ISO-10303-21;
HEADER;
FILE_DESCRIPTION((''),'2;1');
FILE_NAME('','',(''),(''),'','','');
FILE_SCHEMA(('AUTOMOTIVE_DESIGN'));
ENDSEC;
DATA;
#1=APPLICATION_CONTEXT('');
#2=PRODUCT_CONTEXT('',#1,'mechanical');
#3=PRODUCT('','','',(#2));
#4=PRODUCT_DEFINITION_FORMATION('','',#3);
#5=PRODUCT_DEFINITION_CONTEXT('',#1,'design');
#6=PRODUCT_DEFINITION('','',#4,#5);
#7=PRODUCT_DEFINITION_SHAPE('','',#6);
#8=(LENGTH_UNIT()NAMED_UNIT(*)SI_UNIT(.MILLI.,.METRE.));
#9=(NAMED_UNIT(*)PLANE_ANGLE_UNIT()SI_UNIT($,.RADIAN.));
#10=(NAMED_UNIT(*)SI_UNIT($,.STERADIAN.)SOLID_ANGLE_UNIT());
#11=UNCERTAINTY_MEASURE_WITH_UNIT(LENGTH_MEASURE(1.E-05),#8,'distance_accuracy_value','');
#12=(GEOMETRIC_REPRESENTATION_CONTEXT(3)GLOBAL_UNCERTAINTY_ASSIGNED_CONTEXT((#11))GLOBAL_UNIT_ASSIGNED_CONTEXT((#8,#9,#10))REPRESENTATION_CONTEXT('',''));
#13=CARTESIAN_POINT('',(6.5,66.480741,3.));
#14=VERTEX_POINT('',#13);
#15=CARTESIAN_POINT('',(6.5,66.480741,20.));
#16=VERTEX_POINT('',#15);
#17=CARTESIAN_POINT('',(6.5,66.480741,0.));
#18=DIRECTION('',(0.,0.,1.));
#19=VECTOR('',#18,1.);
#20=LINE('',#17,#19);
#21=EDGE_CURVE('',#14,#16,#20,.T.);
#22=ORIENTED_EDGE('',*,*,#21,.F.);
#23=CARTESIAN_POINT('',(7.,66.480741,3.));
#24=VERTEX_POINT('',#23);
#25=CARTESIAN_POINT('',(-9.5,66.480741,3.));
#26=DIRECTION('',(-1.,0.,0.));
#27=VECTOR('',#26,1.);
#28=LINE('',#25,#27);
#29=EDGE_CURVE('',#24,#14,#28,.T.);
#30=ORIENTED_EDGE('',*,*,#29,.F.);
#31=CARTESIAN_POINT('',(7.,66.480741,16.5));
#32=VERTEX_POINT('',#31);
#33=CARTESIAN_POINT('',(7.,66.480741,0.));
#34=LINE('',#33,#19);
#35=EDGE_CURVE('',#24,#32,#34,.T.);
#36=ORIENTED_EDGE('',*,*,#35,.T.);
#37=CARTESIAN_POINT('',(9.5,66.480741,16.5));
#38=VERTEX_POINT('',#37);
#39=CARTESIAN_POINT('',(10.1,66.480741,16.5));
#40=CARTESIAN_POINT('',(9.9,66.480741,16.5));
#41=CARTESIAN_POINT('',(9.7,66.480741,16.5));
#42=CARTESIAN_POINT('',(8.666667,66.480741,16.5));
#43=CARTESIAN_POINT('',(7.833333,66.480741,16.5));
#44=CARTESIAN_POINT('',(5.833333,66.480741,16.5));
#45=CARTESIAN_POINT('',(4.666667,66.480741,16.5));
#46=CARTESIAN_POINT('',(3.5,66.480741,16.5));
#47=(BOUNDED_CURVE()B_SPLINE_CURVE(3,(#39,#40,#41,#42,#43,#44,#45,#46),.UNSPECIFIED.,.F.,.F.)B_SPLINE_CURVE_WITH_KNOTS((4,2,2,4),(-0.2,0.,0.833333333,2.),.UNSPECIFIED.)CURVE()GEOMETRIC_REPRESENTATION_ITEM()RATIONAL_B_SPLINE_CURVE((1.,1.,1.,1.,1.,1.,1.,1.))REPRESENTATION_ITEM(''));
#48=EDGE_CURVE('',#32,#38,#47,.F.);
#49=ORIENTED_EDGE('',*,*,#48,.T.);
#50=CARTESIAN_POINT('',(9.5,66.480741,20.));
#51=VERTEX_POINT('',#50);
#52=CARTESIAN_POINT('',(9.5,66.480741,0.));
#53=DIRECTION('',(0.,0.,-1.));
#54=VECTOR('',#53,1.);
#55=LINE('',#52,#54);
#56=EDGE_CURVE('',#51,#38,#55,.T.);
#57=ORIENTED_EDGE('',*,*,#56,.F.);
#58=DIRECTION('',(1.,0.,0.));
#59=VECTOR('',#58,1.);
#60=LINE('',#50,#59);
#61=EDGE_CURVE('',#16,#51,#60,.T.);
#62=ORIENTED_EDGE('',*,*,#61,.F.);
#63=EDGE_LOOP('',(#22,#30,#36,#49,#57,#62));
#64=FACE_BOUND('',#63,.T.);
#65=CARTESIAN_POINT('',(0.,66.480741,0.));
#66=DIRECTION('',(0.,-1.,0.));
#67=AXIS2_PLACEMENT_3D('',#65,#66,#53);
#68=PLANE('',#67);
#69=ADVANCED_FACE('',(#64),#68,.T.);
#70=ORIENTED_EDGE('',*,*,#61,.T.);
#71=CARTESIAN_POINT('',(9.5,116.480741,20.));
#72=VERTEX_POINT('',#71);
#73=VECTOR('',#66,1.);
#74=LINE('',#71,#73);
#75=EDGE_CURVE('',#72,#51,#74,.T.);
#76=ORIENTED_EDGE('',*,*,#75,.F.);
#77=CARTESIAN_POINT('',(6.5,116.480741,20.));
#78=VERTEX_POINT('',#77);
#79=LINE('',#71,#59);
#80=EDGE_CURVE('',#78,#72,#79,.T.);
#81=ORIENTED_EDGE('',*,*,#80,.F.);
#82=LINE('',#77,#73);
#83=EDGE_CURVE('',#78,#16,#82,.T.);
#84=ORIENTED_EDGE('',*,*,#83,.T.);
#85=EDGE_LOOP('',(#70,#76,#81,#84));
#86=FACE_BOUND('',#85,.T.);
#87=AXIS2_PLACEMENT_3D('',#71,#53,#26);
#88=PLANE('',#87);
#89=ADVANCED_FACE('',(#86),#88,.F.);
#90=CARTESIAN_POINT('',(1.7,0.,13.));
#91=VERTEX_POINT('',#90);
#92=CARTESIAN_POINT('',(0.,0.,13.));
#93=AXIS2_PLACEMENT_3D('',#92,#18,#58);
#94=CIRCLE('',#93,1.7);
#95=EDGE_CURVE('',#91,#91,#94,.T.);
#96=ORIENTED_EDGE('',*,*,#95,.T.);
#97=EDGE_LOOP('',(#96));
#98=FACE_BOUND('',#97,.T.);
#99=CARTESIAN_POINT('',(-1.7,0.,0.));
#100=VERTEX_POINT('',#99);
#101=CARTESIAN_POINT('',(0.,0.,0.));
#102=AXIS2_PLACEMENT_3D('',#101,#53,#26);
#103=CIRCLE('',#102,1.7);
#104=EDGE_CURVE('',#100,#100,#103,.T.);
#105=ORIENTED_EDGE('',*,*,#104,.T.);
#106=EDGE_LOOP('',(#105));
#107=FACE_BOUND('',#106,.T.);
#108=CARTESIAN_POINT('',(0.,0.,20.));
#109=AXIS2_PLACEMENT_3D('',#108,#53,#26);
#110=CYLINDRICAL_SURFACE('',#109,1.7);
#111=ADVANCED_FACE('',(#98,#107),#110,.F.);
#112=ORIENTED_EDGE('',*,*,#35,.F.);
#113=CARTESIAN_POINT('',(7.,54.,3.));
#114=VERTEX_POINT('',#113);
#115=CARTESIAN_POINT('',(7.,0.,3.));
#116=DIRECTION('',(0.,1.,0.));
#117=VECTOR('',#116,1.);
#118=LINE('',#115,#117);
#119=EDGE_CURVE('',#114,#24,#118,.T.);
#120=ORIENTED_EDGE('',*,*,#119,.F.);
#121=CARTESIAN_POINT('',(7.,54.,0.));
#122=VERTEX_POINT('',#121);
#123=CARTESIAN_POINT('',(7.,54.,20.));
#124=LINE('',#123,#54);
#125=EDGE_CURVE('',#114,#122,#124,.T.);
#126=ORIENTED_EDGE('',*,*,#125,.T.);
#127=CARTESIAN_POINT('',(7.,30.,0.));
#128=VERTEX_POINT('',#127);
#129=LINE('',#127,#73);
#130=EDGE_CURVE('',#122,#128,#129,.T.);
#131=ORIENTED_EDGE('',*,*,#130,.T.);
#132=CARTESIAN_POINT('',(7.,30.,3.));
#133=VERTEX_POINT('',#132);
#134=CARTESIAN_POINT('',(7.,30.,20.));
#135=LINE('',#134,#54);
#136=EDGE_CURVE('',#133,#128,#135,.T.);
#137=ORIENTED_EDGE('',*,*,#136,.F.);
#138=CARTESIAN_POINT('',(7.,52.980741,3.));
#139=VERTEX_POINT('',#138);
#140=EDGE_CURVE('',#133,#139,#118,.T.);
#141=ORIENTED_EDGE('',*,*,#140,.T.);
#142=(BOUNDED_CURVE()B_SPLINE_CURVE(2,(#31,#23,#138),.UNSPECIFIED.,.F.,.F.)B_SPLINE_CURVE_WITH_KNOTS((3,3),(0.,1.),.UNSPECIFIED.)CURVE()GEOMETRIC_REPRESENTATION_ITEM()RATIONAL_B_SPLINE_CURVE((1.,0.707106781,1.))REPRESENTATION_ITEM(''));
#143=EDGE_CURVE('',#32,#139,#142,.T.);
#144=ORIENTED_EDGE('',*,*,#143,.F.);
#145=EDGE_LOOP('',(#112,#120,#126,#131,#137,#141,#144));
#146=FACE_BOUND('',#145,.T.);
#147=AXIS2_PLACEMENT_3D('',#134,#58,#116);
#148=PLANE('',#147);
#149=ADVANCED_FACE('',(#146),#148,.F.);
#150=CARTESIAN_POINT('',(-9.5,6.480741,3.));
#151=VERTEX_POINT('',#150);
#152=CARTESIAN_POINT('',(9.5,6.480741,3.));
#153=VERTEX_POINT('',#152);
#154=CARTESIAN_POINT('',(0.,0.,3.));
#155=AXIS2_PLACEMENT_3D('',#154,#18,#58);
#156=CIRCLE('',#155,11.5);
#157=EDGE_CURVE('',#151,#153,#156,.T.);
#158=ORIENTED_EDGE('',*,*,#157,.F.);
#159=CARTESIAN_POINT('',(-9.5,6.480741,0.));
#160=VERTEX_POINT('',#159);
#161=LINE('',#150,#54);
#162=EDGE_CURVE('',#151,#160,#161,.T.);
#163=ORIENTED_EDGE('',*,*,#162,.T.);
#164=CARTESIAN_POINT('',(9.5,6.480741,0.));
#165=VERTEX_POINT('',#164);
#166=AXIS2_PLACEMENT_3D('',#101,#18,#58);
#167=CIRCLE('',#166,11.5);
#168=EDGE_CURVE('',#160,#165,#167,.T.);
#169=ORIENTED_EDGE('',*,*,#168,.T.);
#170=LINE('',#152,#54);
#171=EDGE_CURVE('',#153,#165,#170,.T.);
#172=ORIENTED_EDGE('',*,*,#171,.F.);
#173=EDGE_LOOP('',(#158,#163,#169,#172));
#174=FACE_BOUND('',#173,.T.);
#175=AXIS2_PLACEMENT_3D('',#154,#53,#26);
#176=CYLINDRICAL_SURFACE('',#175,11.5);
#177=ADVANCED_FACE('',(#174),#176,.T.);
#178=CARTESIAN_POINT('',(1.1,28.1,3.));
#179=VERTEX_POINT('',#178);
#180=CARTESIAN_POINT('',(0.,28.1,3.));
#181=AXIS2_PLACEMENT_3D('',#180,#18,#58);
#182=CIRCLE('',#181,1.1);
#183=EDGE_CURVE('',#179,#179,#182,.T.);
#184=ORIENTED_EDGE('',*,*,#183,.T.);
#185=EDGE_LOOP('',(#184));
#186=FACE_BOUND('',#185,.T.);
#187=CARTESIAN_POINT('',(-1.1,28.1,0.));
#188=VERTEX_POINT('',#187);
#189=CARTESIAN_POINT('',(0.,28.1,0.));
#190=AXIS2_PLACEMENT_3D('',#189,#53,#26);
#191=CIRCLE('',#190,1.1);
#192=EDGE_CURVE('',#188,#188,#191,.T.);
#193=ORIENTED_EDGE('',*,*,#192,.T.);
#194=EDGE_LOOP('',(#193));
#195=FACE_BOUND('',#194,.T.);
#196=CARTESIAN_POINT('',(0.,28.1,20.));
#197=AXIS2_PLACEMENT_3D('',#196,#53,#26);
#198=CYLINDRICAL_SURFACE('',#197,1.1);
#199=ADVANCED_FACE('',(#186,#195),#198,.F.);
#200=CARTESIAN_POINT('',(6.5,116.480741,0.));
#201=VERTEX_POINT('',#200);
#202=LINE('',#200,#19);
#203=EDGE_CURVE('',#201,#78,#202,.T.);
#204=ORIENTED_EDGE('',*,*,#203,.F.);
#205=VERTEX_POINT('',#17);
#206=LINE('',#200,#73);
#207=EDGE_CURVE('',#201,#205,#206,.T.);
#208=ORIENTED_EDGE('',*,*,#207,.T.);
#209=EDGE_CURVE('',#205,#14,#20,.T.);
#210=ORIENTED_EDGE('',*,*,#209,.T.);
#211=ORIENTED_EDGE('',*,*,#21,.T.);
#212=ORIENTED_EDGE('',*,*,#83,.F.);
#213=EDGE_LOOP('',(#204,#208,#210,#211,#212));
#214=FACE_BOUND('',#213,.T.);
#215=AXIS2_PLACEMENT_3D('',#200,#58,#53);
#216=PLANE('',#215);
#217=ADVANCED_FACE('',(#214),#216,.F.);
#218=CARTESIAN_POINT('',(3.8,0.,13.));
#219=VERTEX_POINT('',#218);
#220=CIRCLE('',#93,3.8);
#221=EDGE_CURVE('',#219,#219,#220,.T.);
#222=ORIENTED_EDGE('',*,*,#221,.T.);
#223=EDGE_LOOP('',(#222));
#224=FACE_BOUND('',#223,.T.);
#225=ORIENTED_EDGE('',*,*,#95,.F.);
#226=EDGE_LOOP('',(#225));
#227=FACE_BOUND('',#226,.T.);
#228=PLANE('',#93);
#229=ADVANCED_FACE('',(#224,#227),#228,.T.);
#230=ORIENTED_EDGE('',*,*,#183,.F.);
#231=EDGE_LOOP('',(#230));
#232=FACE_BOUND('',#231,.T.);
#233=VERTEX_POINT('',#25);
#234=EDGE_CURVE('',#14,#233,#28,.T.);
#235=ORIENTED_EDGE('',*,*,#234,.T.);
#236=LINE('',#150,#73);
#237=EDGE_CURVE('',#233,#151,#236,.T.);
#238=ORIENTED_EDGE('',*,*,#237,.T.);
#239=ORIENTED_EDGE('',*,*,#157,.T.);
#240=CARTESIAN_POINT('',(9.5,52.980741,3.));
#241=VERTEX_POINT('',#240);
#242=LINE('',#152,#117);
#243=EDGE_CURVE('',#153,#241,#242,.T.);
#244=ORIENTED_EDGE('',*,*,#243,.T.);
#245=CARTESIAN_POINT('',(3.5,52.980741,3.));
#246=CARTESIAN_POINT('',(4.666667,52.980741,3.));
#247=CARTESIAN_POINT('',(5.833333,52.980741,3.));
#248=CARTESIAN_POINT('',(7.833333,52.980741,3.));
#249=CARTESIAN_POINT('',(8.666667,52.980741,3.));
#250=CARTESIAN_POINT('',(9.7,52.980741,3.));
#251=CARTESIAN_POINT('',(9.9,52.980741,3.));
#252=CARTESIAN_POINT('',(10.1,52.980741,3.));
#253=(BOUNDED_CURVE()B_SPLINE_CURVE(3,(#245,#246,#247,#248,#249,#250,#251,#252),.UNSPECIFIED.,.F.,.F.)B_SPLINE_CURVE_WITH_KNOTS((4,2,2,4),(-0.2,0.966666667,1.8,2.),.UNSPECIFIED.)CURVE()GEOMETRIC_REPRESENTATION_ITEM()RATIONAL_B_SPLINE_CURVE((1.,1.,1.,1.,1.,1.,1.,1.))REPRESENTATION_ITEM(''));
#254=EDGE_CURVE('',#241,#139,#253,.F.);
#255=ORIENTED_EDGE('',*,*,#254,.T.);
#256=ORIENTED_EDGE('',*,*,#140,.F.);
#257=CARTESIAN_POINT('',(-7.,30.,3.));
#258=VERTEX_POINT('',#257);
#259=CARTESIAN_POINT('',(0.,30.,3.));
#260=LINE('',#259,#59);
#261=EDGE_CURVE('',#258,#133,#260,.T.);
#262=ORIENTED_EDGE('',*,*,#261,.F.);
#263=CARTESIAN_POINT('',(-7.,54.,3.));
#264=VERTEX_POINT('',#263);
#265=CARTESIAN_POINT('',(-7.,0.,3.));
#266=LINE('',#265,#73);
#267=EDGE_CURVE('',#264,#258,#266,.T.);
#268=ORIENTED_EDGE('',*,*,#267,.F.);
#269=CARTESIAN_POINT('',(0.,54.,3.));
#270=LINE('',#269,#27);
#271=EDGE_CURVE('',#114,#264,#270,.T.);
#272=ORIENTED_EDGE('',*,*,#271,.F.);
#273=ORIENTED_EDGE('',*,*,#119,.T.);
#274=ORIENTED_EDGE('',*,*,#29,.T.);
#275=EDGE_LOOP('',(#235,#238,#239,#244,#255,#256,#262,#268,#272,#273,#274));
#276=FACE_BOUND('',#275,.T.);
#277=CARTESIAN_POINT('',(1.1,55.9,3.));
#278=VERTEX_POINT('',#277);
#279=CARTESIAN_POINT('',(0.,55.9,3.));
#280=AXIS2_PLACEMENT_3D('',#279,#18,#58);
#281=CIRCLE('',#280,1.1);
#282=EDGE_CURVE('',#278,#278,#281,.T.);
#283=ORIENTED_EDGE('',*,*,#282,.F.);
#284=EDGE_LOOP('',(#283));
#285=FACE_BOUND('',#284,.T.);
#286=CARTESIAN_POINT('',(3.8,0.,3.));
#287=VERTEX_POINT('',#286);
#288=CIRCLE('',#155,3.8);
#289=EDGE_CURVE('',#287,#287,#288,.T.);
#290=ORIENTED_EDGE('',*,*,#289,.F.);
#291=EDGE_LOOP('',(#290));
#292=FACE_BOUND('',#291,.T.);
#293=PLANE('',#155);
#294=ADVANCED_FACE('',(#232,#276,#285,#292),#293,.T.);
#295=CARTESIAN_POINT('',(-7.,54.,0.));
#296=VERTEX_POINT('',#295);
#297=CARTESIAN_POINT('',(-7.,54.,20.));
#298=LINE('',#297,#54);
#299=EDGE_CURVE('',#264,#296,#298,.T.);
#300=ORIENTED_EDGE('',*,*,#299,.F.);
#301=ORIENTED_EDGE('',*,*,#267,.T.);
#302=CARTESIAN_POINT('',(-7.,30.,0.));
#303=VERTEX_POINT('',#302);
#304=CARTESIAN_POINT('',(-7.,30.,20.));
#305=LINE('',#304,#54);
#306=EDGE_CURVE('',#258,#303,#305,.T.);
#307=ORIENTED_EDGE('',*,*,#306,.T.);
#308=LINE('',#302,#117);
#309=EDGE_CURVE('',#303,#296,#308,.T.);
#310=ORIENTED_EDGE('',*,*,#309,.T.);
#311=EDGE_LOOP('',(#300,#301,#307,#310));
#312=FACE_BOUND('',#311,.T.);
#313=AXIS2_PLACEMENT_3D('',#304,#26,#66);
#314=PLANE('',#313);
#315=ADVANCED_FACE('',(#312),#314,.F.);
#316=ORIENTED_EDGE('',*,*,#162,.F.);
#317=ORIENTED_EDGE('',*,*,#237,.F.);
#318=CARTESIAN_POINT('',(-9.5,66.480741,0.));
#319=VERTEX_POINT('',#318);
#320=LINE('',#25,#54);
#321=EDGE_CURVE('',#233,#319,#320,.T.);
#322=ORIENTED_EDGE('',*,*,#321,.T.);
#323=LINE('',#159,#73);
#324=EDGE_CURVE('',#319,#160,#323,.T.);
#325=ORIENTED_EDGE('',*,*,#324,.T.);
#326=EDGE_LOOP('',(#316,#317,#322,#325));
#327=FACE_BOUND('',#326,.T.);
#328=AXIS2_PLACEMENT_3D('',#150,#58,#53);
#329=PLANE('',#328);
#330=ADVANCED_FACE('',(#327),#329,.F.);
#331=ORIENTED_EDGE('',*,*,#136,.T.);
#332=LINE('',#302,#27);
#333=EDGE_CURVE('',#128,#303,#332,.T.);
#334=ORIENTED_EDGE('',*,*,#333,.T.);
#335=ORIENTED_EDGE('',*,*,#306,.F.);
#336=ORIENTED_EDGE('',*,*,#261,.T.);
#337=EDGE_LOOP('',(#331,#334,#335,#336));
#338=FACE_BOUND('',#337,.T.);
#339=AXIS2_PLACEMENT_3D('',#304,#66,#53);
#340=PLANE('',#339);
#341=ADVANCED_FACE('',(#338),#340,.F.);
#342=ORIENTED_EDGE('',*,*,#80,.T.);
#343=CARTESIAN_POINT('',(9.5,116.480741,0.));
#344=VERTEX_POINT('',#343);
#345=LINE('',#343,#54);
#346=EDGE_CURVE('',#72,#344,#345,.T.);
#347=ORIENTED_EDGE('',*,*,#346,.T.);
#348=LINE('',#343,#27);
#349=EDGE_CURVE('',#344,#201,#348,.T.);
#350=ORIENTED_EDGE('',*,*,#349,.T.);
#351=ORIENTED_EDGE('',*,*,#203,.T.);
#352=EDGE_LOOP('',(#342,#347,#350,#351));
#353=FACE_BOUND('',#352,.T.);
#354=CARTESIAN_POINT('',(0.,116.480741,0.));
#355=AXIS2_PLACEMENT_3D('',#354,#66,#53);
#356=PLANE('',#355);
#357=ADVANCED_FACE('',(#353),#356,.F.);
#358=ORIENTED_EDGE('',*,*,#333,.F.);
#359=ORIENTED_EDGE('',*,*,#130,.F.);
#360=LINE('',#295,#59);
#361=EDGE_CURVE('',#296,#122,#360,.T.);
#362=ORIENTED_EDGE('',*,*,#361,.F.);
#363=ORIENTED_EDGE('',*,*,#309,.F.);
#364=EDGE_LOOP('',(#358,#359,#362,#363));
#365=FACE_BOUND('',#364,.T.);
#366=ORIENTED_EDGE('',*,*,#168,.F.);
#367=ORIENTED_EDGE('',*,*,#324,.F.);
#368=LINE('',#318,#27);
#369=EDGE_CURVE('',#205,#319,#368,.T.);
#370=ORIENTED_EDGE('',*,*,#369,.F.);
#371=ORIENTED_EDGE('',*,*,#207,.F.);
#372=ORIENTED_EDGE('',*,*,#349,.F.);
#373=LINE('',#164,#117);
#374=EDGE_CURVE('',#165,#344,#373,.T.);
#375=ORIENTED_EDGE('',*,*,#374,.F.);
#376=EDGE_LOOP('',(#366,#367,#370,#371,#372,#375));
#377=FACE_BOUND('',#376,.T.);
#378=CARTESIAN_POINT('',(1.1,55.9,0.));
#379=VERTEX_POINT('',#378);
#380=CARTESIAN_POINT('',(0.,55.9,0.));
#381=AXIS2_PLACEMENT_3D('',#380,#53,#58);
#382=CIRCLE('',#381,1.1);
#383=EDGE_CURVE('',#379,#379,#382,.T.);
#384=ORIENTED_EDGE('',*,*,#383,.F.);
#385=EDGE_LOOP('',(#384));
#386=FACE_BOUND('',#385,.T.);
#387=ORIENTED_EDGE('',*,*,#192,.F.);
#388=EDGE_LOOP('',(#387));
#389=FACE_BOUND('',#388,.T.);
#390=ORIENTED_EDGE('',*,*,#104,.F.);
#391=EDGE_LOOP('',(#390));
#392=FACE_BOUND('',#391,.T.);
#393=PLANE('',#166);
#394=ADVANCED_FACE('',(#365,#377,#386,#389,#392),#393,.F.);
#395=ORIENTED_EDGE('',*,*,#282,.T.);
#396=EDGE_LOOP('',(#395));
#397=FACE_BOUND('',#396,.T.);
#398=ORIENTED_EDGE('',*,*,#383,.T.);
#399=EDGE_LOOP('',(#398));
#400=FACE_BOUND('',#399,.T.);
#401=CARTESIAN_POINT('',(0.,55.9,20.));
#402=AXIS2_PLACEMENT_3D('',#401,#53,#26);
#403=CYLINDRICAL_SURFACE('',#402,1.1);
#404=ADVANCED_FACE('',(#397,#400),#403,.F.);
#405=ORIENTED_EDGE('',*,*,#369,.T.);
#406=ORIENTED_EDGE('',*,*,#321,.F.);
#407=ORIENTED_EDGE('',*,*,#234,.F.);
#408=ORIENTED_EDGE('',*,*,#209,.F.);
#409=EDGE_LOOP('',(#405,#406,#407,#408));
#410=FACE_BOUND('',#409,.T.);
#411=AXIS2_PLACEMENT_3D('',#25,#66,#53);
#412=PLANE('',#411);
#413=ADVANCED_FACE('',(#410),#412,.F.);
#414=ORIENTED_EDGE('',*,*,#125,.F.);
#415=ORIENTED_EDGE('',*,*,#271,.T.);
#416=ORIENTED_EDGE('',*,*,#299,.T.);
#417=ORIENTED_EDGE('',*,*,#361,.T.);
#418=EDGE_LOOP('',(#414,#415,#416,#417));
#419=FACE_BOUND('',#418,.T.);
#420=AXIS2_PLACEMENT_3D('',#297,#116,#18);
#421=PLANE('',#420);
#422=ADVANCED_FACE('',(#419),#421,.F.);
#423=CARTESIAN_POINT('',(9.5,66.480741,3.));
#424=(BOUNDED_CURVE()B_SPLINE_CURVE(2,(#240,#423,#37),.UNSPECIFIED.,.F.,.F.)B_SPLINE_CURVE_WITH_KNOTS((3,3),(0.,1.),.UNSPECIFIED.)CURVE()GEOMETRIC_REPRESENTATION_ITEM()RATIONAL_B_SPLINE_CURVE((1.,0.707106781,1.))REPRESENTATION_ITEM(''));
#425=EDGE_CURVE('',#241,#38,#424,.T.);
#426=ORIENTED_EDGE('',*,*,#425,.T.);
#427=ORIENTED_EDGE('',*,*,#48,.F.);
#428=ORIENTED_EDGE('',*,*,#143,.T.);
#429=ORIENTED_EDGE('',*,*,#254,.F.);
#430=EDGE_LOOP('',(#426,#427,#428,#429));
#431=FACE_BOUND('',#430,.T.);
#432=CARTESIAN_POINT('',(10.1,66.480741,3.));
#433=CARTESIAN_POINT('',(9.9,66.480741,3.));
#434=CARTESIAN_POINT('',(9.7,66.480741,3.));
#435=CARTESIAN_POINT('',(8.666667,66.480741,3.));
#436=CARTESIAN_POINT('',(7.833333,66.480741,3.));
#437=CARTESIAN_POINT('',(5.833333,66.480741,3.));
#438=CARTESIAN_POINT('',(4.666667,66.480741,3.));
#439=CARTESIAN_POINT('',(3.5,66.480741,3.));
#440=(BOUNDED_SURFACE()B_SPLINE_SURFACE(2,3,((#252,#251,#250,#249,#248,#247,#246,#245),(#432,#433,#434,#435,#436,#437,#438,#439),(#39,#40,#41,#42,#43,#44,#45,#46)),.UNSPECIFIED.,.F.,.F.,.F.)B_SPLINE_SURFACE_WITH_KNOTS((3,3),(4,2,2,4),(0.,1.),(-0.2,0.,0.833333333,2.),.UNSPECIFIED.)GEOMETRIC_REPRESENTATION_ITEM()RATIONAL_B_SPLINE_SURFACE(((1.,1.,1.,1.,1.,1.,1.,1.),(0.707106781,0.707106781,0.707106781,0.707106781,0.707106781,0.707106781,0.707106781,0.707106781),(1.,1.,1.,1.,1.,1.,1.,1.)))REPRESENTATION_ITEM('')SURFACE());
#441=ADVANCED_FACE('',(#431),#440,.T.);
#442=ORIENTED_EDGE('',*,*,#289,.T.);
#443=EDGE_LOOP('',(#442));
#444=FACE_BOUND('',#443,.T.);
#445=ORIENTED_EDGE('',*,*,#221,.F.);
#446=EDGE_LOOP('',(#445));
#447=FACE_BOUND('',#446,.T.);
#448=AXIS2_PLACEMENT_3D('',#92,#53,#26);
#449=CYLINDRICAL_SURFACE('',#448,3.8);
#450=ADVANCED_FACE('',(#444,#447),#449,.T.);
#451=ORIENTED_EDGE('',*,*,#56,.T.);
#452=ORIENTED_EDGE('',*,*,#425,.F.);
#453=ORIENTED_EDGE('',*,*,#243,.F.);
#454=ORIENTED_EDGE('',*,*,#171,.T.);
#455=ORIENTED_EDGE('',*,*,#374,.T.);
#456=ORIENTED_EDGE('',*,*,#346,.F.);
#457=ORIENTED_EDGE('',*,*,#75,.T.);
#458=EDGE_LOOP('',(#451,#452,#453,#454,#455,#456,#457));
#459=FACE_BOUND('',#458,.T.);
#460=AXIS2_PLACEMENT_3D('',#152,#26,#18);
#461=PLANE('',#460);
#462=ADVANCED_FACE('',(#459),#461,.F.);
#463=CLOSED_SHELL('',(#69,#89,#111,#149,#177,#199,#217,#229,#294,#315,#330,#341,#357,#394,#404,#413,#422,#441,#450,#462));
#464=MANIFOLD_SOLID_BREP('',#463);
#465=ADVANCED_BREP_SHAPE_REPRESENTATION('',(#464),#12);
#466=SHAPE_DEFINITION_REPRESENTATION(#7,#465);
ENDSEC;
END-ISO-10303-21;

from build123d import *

# Parameters (mm, degrees)
BOSS_EXTRUDE1_DEPTH = 3
SKETCH2_R           = 3.8
BOSS_EXTRUDE2_DEPTH = 10
SKETCH3_R           = 1.7
CUT_EXTRUDE1_DEPTH  = 20
SKETCH5_R           = 1.1
SKETCH5_W           = 14
SKETCH5_H           = 24
CUT_EXTRUDE2_DEPTH  = 20
SKETCH6_W           = 3
SKETCH6_H           = 20
BOSS_EXTRUDE3_DEPTH = 50
FILLET2_START       = 7
FILLET2_DEPTH       = 2.5


with BuildPart() as part:
    # Sketch1 → Boss-Extrude1 (new body)
    with BuildSketch(Plane.XY):
        with BuildLine():
            Line((-9.5, 6.480740698), (-9.5, 66.480740698))
            Line((-9.5, 66.480740698), (9.5, 66.480740698))
            Line((9.5, 66.480740698), (9.5, 6.480740698))
            ThreePointArc((9.5, 6.480740698), (0, -11.5), (-9.5, 6.480740698))
        make_face()
    extrude(amount=BOSS_EXTRUDE1_DEPTH)

    # Sketch2 → Boss-Extrude2 (add)
    with BuildSketch(Plane.XY.offset(3)):
        Circle(SKETCH2_R)
    extrude(amount=BOSS_EXTRUDE2_DEPTH)

    # Sketch3 → Cut-Extrude1 (cut)
    with BuildSketch(Plane(origin=(0, 0, 0), x_dir=(-1, 0, 0), z_dir=(0, 0, -1))):
        Circle(SKETCH3_R)
    extrude(amount=-CUT_EXTRUDE1_DEPTH, mode=Mode.SUBTRACT)

    # Sketch5 → Cut-Extrude2 (cut)
    with BuildSketch(Plane(origin=(0, 0, 0), x_dir=(-1, 0, 0), z_dir=(0, 0, -1))):
        with Locations((0, 28.1)):
            Circle(SKETCH5_R)
        with Locations(Location((0, 55.9, 0), (0, 0, 180))):
            Circle(SKETCH5_R)
        with Locations((0, 42)):
            Rectangle(SKETCH5_W, SKETCH5_H)
    extrude(amount=-CUT_EXTRUDE2_DEPTH, mode=Mode.SUBTRACT)

    # Sketch6 → Boss-Extrude3 (add)
    with BuildSketch(Plane(origin=(0, 66.480740698, 0), x_dir=(1, 0, 0), z_dir=(0, 1, 0))):
        with Locations((8, -10)):
            Rectangle(SKETCH6_W, SKETCH6_H)
    extrude(amount=BOSS_EXTRUDE3_DEPTH)

    # Fillet2: read off the stored shape, not the designer's step
    # Fillet2 outline → Fillet2 (add)
    with BuildSketch(Plane.YZ.offset(FILLET2_START)):
        with BuildLine():
            add(Edge.make_bspline(
                [(52.980740698, 3), (66.480740698, 3), (66.480740698, 16.5)],
                knots=[0, 0, 0, 1, 1, 1], degree=2, weights=[1, 0.707106781, 1]))
            Line((52.980740698, 3), (66.480740698, 3))
            Line((66.480740698, 3), (66.480740698, 16.5))
        make_face()
    extrude(amount=FILLET2_DEPTH)


solid = part.part
